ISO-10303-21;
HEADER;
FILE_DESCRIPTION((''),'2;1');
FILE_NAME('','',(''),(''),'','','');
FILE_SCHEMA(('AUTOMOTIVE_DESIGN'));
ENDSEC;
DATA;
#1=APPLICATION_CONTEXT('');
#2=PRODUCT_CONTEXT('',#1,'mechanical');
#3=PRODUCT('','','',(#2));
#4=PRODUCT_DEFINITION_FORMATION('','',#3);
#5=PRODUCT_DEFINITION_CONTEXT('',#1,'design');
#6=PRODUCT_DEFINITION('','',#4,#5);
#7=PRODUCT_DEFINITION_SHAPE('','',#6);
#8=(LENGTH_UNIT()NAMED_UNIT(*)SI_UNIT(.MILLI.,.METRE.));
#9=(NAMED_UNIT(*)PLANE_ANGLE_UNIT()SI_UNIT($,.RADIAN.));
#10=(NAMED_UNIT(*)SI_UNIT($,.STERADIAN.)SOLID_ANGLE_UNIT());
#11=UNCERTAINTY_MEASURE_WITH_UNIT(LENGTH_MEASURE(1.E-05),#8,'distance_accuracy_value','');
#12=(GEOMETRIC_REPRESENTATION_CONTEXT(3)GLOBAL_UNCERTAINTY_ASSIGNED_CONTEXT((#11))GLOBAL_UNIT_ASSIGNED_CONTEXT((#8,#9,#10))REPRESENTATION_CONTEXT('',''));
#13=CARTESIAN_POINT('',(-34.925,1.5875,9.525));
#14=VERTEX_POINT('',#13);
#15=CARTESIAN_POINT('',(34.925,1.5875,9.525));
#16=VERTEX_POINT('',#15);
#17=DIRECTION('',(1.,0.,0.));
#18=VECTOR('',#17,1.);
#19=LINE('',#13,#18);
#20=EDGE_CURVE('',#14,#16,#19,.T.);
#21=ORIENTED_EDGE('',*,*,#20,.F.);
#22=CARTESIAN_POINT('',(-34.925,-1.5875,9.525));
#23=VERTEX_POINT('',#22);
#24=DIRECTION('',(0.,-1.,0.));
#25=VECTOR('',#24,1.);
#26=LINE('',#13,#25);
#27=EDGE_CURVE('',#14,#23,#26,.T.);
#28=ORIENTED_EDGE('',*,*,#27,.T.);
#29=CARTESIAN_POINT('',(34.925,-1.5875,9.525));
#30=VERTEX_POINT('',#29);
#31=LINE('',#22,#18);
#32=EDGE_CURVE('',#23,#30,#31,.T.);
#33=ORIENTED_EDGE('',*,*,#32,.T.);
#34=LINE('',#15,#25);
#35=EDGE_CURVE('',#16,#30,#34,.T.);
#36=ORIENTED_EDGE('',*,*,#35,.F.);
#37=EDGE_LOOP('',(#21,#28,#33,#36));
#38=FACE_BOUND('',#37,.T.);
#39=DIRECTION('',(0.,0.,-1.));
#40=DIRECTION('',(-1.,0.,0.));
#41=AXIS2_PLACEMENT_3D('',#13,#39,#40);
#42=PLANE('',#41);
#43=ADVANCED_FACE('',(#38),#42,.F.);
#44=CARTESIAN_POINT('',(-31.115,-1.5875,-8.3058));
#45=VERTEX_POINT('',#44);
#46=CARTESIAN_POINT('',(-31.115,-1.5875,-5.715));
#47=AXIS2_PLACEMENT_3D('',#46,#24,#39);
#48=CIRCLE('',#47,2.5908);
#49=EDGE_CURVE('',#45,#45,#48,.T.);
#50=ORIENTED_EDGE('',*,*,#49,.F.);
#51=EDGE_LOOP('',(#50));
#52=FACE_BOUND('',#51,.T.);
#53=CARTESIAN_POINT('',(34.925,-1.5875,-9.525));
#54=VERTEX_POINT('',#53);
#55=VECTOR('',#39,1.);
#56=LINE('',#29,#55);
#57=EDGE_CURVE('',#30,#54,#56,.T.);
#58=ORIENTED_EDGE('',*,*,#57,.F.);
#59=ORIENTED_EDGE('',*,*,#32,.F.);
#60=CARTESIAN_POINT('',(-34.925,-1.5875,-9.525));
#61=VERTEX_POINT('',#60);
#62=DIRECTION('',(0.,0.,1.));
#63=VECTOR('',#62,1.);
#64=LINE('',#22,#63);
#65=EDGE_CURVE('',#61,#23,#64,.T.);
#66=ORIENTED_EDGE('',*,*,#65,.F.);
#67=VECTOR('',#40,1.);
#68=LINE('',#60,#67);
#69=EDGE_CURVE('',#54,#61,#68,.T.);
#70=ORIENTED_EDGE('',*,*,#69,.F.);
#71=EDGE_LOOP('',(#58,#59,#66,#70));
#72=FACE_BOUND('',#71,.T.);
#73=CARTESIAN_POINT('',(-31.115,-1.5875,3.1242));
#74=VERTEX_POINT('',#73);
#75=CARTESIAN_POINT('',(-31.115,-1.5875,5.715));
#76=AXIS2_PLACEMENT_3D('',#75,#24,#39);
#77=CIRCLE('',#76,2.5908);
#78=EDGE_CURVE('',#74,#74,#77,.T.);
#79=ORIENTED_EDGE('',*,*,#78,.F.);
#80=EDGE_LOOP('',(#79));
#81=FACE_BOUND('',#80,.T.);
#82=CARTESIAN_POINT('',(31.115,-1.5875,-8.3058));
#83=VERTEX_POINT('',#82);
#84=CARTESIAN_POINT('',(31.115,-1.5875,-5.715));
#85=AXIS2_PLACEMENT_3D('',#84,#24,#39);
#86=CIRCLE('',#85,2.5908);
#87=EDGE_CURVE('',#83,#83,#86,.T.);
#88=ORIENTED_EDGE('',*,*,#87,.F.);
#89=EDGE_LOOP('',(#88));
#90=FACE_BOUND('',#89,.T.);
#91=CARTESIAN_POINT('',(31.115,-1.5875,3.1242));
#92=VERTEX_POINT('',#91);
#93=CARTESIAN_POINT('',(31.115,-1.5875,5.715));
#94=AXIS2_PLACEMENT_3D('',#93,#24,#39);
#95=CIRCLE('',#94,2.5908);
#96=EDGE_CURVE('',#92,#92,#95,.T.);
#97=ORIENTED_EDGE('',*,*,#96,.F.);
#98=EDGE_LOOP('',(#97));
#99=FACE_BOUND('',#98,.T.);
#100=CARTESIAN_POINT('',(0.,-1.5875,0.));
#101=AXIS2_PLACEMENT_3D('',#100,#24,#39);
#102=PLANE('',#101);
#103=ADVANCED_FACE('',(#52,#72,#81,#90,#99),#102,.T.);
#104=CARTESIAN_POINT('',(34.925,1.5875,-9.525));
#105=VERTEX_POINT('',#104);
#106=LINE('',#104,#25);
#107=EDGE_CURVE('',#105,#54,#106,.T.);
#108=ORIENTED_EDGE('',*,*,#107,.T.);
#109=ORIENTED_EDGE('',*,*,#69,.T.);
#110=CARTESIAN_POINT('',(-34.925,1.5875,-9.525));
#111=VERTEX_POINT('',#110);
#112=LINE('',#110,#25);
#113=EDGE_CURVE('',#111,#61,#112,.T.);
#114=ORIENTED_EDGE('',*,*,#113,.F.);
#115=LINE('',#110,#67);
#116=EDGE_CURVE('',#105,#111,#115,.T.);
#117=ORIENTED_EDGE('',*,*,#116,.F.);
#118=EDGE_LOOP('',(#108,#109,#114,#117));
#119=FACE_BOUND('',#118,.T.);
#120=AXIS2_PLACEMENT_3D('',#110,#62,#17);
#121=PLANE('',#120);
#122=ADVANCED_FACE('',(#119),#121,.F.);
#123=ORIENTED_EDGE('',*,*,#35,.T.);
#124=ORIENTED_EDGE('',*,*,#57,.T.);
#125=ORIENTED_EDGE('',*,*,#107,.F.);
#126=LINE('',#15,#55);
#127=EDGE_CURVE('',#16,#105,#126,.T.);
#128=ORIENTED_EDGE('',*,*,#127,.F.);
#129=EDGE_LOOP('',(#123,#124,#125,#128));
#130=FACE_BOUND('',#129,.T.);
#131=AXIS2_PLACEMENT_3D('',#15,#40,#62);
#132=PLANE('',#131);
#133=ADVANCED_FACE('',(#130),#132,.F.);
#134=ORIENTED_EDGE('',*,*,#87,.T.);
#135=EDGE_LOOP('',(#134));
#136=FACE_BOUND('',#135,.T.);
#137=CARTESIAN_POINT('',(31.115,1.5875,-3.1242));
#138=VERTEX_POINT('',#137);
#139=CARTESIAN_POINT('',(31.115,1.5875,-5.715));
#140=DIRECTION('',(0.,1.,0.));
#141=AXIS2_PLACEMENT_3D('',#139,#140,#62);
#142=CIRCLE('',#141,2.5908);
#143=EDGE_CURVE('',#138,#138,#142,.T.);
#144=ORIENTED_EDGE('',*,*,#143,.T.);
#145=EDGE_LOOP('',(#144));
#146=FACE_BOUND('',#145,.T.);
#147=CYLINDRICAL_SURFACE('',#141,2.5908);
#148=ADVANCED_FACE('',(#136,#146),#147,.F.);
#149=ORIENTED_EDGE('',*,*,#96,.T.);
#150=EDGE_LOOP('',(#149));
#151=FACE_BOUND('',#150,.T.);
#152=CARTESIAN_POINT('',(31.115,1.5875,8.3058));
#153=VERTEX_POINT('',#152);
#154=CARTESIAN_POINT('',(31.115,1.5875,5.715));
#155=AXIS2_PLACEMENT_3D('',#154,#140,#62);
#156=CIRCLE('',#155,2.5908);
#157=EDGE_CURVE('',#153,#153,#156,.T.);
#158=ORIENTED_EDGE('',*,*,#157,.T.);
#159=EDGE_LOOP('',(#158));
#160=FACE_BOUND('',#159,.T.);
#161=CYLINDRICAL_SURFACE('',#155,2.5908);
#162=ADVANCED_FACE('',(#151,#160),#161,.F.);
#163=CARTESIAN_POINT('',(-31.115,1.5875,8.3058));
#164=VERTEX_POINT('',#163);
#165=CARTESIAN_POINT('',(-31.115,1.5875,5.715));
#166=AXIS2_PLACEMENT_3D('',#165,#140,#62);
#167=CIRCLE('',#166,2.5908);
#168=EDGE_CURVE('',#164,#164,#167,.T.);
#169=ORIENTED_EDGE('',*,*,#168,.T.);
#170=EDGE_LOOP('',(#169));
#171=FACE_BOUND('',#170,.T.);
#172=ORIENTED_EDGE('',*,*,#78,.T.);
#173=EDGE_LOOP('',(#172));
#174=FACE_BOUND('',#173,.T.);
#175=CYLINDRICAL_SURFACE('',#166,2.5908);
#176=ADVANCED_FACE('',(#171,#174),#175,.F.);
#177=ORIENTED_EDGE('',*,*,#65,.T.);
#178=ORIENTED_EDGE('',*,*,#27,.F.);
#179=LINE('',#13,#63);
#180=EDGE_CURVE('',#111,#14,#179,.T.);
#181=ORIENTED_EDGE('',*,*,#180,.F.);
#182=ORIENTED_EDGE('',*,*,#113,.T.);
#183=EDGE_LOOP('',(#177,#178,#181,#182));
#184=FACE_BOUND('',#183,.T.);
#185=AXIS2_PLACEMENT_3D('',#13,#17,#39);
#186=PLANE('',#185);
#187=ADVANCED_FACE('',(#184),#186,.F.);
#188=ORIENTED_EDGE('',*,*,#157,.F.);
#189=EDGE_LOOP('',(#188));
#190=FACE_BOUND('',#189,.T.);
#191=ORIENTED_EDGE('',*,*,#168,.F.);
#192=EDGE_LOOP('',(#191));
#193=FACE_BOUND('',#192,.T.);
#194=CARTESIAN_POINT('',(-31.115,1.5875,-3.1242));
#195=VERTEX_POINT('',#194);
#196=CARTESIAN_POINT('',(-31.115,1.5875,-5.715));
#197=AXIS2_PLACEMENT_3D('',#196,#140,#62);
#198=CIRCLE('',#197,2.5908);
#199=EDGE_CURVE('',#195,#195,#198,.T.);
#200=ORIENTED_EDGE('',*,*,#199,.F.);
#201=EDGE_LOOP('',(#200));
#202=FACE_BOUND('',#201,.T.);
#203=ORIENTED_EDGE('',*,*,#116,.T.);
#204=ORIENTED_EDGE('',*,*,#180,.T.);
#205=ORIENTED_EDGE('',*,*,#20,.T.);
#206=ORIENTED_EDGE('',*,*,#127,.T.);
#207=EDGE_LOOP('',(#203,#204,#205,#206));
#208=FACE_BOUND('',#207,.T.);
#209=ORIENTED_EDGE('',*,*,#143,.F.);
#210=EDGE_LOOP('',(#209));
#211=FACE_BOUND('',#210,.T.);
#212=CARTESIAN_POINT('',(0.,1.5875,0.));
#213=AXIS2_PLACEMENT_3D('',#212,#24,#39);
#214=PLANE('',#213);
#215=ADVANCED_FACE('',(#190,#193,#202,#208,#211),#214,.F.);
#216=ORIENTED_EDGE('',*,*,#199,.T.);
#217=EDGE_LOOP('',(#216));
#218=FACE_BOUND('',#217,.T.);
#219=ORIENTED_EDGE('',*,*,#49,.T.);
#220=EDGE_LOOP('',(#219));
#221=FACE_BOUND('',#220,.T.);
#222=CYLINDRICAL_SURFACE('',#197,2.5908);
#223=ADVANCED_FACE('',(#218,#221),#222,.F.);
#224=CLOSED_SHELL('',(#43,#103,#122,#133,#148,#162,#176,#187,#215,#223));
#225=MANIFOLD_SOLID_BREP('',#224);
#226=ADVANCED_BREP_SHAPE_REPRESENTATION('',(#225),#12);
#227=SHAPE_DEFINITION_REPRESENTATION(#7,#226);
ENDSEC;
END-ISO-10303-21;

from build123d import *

# Parameters (mm, degrees)
SKETCH1_W                          = 69.85
SKETCH1_H                          = 19.05
BOSS_EXTRUDE1_DEPTH                = 1.5875
F_6_START                          = -1.5875
F_6_0_204_DIAMETER_HOLE1_OUTLINE_R = 2.5908
F_6_0_204_DIAMETER_HOLE1_DEPTH     = 3.175


# Read off the part's stored shape, not the designer's step: #6 (0.204) Diameter Hole1
with BuildPart() as part:
    # Sketch1 → Boss-Extrude1 (new, symmetric)
    with BuildSketch(Plane(origin=(0, 0, 0), x_dir=(1, 0, 0), z_dir=(0, 1, 0))):
        Rectangle(SKETCH1_W, SKETCH1_H)
    extrude(amount=BOSS_EXTRUDE1_DEPTH, both=True)

    # #6 (0.204) Diameter Hole1 outline → #6 (0.204) Diameter Hole1 (cut)
    with BuildSketch(Plane(origin=(0, 0, 0), x_dir=(1, 0, 0), z_dir=(0, 1, 0)).offset(F_6_START)):
        with Locations((-31.115, -5.715)):
            Circle(F_6_0_204_DIAMETER_HOLE1_OUTLINE_R)
        with Locations((31.115, 5.715)):
            Circle(F_6_0_204_DIAMETER_HOLE1_OUTLINE_R)
        with Locations((31.115, -5.715)):
            Circle(F_6_0_204_DIAMETER_HOLE1_OUTLINE_R)
        with Locations((-31.115, 5.715)):
            Circle(F_6_0_204_DIAMETER_HOLE1_OUTLINE_R)
    extrude(amount=F_6_0_204_DIAMETER_HOLE1_DEPTH, mode=Mode.SUBTRACT)


solid = part.part
